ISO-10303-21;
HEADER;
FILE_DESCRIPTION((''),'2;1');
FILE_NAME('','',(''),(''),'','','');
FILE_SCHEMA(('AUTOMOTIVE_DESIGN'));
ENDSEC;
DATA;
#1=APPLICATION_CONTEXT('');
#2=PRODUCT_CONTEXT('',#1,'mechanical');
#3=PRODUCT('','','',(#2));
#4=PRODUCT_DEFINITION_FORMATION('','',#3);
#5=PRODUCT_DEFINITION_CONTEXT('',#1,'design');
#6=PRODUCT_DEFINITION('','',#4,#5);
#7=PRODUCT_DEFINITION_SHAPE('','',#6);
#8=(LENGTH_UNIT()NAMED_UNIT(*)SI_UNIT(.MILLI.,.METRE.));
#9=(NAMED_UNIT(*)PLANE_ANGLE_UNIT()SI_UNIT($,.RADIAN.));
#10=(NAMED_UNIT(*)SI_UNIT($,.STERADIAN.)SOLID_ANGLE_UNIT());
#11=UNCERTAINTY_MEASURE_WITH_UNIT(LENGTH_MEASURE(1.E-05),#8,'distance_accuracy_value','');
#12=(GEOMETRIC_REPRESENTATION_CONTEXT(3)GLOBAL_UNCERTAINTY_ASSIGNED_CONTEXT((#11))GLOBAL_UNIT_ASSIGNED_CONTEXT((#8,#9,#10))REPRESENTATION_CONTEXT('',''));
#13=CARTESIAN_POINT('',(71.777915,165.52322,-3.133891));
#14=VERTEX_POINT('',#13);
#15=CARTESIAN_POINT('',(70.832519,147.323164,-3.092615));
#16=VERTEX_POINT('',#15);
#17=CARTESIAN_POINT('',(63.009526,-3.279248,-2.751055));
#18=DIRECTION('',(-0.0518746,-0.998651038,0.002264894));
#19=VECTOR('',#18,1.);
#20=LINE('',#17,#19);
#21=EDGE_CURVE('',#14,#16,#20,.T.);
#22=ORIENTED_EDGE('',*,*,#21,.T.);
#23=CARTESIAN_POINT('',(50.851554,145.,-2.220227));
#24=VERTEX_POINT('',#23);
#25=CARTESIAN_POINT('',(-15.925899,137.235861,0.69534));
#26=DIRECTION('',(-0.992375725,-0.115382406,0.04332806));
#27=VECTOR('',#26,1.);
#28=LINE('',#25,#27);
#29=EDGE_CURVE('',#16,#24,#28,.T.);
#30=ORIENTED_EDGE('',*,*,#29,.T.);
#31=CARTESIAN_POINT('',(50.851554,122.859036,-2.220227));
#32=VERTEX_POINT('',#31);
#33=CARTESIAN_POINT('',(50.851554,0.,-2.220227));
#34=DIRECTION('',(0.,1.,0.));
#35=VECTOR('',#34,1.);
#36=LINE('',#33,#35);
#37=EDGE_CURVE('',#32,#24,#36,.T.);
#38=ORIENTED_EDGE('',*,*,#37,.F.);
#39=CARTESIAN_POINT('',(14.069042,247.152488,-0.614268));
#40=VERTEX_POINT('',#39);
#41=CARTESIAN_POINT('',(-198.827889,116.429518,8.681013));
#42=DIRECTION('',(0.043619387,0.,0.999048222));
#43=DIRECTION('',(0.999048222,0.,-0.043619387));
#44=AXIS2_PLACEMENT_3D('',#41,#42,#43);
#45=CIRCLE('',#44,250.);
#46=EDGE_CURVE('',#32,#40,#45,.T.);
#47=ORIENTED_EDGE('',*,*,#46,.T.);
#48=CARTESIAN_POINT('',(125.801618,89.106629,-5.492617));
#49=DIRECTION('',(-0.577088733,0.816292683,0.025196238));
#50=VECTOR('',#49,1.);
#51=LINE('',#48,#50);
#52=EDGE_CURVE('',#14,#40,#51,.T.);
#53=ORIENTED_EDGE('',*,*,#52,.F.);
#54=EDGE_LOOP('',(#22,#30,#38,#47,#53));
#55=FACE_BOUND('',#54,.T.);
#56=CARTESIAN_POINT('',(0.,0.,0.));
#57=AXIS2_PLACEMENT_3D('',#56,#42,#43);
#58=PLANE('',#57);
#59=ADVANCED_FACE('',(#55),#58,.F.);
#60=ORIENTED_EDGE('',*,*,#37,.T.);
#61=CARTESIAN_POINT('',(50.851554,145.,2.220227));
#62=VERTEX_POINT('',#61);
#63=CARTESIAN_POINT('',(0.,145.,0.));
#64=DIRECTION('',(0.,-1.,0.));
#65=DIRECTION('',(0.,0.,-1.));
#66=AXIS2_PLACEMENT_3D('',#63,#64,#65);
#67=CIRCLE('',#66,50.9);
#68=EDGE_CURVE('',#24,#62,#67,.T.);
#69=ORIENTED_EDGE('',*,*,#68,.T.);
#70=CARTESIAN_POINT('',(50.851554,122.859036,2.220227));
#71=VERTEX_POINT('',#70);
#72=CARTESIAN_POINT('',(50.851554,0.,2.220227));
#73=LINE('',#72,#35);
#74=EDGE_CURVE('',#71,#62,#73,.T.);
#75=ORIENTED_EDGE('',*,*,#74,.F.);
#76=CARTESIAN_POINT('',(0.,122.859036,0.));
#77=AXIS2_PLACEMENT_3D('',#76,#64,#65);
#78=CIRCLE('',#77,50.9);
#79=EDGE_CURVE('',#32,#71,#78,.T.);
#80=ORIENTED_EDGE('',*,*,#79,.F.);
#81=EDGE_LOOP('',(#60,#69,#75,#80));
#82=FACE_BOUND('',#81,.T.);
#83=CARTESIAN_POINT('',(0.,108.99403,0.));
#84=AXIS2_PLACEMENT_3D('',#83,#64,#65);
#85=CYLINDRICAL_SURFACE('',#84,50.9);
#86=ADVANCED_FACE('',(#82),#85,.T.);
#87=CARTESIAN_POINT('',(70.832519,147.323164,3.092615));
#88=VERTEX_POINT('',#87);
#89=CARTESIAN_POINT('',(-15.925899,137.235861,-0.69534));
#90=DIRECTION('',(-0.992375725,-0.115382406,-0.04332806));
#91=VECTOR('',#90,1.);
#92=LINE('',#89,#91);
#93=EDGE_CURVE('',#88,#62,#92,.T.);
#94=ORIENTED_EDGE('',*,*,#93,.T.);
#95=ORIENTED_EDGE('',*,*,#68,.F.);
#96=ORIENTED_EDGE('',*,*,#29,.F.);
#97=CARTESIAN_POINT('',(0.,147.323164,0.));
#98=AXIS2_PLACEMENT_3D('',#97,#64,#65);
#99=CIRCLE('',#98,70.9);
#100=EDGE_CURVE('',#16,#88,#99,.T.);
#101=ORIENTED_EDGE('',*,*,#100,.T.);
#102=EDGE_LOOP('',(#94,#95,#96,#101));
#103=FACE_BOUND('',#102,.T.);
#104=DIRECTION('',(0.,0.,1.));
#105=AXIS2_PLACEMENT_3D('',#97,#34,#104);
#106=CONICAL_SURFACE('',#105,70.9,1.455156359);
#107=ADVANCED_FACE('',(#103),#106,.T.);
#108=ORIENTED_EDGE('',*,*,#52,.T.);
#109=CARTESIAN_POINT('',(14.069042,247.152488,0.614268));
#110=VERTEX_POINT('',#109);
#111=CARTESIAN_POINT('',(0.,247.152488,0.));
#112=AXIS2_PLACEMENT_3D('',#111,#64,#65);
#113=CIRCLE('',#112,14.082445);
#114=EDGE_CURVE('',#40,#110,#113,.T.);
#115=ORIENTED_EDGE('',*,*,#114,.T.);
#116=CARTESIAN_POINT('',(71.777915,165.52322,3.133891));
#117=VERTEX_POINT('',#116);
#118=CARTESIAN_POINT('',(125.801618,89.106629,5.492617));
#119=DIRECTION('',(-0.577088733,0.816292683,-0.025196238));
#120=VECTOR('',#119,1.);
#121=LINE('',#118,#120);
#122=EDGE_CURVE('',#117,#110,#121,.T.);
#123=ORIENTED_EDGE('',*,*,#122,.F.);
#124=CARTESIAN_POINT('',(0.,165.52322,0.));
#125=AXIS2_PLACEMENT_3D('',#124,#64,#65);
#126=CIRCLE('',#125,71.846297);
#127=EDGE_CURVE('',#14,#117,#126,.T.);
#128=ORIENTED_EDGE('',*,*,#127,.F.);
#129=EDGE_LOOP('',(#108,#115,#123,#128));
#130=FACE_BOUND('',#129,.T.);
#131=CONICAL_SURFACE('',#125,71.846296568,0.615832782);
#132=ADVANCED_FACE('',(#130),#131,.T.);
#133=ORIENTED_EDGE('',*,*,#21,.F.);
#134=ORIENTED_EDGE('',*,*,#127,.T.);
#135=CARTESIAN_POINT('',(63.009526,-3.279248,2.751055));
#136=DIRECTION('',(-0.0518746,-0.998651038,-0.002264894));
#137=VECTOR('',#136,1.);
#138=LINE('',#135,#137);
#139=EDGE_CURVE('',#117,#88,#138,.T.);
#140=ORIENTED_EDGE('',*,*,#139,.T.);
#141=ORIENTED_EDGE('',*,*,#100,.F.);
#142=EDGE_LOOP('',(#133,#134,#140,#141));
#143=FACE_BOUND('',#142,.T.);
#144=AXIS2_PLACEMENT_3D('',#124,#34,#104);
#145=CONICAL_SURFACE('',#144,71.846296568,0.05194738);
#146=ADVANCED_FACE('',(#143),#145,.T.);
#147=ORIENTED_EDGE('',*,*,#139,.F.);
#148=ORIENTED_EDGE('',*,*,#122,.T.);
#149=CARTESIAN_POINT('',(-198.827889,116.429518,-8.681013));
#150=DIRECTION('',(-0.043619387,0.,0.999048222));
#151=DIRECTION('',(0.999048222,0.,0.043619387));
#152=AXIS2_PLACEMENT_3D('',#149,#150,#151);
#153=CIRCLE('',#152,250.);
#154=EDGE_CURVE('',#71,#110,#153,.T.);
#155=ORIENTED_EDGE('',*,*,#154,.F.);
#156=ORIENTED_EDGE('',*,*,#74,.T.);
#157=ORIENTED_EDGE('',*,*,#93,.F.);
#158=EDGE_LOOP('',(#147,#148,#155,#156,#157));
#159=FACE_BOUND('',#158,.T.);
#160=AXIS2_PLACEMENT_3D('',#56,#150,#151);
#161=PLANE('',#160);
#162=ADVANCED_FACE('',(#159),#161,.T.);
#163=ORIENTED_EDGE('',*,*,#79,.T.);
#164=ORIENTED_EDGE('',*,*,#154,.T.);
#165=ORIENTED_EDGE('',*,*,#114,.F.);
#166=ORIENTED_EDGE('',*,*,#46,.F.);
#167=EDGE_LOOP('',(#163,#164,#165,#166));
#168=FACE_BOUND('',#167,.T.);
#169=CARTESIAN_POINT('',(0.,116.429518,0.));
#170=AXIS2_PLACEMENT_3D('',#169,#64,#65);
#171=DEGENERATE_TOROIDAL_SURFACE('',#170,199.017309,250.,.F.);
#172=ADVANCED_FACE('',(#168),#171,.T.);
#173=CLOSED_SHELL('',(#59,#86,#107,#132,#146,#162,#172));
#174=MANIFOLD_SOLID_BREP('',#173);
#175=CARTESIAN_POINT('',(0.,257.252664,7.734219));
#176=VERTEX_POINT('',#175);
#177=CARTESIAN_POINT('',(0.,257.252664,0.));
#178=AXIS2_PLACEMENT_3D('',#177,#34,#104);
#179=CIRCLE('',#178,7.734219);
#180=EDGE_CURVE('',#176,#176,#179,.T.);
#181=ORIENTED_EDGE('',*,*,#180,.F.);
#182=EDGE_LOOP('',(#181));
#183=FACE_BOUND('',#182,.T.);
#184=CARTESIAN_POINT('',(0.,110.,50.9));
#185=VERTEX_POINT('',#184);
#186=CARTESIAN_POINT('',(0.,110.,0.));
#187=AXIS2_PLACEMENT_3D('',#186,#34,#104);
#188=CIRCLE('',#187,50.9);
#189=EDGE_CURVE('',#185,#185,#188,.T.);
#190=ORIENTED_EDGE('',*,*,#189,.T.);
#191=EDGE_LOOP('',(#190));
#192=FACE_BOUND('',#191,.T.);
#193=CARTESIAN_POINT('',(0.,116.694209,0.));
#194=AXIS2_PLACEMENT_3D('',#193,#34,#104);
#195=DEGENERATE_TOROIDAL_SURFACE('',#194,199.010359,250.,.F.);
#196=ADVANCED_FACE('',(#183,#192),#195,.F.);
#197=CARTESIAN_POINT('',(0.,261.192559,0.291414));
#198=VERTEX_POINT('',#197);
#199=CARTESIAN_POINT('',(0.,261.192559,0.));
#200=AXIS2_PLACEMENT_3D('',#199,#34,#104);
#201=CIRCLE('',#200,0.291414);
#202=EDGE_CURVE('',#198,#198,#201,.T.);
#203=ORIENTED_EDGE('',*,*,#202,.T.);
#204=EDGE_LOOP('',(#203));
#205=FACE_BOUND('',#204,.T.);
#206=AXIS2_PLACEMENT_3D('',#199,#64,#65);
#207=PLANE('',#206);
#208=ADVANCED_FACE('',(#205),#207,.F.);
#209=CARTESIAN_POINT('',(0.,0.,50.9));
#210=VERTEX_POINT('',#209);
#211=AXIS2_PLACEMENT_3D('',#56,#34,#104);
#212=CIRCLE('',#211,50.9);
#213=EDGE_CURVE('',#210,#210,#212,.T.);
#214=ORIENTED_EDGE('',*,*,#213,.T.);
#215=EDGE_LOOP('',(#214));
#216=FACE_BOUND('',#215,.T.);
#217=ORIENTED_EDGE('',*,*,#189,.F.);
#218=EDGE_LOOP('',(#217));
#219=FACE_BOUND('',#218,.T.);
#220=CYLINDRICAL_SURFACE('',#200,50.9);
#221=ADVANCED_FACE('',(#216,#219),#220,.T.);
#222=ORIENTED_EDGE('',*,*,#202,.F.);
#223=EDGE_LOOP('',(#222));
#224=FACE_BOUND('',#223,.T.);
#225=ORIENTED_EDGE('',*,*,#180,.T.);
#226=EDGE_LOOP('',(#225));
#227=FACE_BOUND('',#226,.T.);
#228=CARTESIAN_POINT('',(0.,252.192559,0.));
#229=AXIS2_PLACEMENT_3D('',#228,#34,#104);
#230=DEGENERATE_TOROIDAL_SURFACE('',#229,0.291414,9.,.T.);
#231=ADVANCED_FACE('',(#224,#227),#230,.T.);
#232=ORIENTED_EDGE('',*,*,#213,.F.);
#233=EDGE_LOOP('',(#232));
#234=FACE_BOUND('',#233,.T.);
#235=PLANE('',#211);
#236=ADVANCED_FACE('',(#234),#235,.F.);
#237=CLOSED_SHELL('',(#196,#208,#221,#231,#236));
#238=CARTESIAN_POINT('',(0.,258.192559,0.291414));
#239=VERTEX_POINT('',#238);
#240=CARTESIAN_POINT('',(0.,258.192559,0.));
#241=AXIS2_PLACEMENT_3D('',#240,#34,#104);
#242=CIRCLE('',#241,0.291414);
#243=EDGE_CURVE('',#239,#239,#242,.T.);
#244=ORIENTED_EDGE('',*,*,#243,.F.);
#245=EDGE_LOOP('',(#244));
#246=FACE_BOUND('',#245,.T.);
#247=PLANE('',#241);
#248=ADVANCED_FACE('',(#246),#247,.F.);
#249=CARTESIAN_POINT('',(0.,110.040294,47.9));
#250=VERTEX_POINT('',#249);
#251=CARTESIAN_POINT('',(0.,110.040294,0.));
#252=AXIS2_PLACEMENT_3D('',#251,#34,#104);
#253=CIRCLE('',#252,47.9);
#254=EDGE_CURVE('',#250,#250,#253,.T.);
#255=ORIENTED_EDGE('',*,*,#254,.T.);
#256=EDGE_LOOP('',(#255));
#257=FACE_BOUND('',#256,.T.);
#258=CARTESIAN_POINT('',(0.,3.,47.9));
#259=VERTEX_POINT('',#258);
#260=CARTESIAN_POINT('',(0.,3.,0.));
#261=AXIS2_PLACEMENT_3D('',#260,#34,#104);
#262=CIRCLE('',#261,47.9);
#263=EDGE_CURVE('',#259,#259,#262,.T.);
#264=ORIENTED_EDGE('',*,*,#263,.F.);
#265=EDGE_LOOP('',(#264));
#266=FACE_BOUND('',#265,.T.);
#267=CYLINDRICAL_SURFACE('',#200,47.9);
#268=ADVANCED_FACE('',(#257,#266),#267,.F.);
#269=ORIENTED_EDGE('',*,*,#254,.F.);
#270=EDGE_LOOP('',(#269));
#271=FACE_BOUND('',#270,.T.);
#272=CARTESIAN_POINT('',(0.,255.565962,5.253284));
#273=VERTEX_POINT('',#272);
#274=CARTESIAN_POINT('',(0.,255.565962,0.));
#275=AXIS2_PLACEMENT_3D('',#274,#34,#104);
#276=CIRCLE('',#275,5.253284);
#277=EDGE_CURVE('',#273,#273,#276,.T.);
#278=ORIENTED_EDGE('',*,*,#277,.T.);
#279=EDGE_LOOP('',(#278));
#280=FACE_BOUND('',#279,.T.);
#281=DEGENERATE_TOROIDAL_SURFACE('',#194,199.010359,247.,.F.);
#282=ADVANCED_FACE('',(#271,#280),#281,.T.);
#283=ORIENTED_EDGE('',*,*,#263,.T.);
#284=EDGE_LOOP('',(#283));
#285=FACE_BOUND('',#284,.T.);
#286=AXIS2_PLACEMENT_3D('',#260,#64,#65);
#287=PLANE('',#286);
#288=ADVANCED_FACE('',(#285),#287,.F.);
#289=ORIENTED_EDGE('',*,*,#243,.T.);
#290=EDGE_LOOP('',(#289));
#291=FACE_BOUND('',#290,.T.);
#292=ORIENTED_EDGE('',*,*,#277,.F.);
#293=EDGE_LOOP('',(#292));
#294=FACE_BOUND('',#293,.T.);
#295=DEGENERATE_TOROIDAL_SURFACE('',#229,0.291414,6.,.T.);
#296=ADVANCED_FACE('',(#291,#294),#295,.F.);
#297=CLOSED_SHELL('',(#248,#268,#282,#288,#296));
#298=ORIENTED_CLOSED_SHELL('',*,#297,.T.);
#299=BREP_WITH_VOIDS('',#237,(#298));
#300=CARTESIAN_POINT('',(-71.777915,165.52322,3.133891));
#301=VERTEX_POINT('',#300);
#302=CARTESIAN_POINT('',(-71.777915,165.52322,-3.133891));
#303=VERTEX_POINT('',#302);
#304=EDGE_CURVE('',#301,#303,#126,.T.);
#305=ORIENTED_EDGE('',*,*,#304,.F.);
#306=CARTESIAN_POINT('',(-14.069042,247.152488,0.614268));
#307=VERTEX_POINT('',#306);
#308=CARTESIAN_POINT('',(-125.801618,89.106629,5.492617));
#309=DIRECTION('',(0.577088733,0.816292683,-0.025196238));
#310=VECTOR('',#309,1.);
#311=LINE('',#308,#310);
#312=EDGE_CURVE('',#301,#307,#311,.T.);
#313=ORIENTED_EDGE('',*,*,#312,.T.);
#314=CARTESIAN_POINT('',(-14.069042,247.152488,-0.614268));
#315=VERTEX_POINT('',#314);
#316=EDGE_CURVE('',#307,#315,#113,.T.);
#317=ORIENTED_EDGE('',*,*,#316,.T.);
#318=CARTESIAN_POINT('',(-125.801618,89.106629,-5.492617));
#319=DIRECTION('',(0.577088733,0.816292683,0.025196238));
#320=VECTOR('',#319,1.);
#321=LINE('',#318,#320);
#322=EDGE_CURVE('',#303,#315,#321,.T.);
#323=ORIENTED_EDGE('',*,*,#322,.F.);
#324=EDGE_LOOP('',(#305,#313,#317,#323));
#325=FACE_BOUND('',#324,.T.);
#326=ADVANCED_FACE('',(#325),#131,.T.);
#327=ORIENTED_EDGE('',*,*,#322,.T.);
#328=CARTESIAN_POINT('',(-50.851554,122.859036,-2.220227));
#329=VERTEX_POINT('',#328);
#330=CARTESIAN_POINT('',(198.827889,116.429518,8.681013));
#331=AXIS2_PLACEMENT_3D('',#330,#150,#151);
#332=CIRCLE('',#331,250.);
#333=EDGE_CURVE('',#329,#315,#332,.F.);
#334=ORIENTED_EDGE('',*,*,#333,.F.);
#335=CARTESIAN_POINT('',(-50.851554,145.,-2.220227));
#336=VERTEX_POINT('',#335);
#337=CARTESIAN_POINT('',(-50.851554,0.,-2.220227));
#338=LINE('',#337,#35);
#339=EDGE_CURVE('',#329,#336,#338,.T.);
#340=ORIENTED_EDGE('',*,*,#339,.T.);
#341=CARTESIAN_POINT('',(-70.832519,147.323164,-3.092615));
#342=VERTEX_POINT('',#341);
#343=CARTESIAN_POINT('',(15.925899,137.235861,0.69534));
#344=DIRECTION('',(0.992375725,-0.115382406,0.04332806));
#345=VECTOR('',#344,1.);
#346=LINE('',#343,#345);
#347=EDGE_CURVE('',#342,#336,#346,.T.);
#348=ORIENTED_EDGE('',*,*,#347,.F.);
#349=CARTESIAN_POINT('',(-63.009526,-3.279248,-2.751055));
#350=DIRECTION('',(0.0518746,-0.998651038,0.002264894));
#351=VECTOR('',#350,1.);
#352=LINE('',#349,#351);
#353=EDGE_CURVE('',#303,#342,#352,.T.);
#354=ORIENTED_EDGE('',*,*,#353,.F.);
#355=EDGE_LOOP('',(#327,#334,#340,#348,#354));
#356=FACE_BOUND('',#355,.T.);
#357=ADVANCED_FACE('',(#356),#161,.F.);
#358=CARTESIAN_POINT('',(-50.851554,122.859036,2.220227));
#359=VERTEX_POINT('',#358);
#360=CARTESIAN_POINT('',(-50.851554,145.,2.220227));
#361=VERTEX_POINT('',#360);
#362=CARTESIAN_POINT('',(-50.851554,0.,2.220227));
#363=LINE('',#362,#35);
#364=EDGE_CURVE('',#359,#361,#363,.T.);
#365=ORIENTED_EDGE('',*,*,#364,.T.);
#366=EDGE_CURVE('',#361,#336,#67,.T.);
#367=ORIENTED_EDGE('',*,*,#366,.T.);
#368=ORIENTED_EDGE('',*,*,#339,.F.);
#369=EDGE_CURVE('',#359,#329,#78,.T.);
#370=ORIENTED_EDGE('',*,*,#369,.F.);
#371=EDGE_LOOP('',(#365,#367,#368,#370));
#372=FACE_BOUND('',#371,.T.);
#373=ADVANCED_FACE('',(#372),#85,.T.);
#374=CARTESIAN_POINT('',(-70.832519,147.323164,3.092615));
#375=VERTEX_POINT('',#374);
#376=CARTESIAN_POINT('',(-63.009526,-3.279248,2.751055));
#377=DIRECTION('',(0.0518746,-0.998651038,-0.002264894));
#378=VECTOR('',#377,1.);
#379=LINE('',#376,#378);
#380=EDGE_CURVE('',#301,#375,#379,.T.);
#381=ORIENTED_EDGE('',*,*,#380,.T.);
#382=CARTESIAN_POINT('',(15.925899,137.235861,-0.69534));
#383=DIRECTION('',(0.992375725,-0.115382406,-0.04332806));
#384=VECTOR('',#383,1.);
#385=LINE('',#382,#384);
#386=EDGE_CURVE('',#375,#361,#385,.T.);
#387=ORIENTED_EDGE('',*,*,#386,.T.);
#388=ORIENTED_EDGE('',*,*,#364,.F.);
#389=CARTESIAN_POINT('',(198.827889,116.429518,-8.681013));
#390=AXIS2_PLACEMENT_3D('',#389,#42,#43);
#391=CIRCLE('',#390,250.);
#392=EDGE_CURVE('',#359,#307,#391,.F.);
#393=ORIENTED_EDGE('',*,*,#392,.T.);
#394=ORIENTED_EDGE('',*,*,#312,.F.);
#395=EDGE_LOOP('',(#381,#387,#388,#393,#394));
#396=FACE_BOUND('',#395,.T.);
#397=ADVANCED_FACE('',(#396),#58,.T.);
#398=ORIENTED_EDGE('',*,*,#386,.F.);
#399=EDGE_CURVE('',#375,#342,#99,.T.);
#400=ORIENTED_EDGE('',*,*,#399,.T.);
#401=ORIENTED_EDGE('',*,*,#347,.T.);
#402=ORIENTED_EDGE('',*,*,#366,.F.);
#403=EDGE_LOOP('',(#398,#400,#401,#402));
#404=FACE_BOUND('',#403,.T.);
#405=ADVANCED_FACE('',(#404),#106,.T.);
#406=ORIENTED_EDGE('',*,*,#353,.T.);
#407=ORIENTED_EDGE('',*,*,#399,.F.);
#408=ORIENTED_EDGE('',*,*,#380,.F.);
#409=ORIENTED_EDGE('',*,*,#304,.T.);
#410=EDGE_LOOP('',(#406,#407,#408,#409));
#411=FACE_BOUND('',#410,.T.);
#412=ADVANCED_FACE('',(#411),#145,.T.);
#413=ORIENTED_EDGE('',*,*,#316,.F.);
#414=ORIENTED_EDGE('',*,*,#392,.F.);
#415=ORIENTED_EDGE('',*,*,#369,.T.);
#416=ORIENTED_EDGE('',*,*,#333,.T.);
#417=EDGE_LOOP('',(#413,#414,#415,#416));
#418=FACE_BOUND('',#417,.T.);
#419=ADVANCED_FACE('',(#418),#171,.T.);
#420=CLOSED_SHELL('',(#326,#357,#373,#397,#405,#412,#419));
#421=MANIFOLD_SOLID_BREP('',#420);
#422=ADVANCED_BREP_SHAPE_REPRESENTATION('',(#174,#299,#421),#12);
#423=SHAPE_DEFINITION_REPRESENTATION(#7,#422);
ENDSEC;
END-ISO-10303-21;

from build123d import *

# Parameters (mm, degrees)
REVOLVE2_ANGLE           = 2.5
REVOLVE2_OTHER_WAY_ANGLE = 2.5


with BuildPart() as part:
    # Sketch1 → Revolve1 (revolve)
    with BuildSketch(Plane.XY, mode=Mode.PRIVATE) as revolve1_sk:
        with BuildLine():
            Line((0, 0), (50.9, 0))
            Line((50.9, 0), (50.9, 110))
            ThreePointArc((50.9, 110), (40.894350566, 187.020094879), (7.734219256, 257.252663728))
            ThreePointArc((7.734219256, 257.252663728), (4.50205931, 260.146833019), (0.291414436, 261.192559341))
            Line((0.291414436, 261.192559341), (0, 261.192559341))
            Line((0, 261.192559341), (0, 258.192559341))
            Line((0, 258.192559341), (0.291414436, 258.192559341))
            ThreePointArc((0.291414436, 258.192559341), (3.098511019, 257.495408459), (5.253284316, 255.565962266))
            ThreePointArc((5.253284316, 255.565962266), (38.021126548, 186.156967057), (47.9, 110.040293721))
            Line((47.9, 110.040293721), (47.9, 3))
            Line((47.9, 3), (0, 3))
            Line((0, 3), (0, 0))
        make_face()
    revolve(revolve1_sk.sketch.rotate(Axis((0, 261.192559341, 0), (0, -1, 0)), 90), axis=Axis((0, 261.192559341, 0), (0, -1, 0)))


with BuildPart() as body_2:
    # Sketch2 → Revolve2 (revolve)
    with BuildSketch(Plane.XY):
        with BuildLine():
            Line((-50.9, 122.859035945), (-50.9, 145))
            Line((-50.9, 145), (-70.9, 147.323164187))
            Line((-70.9, 147.323164187), (-71.846296568, 165.523219819))
            Line((-71.846296568, 165.523219819), (-14.082444903, 247.152488104))
            ThreePointArc((-14.082444903, 247.152488104), (-40.68754222, 187.433632917), (-50.9, 122.859035945))
        make_face()
        with BuildLine():
            ThreePointArc((50.9, 122.859035945), (40.68754222, 187.433632917), (14.082444903, 247.152488104))
            Line((14.082444903, 247.152488104), (71.846296568, 165.523219819))
            Line((71.846296568, 165.523219819), (70.9, 147.323164187))
            Line((70.9, 147.323164187), (50.9, 145))
            Line((50.9, 145), (50.9, 122.859035945))
        make_face()
    revolve(axis=Axis((0, 108.994029955, 0), (0, 1, 0)), revolution_arc=REVOLVE2_ANGLE)

    # Sketch2 → Revolve2 other way (revolve)
    with BuildSketch(Plane.XY):
        with BuildLine():
            Line((-50.9, 122.859035945), (-50.9, 145))
            Line((-50.9, 145), (-70.9, 147.323164187))
            Line((-70.9, 147.323164187), (-71.846296568, 165.523219819))
            Line((-71.846296568, 165.523219819), (-14.082444903, 247.152488104))
            ThreePointArc((-14.082444903, 247.152488104), (-40.68754222, 187.433632917), (-50.9, 122.859035945))
        make_face()
        with BuildLine():
            ThreePointArc((50.9, 122.859035945), (40.68754222, 187.433632917), (14.082444903, 247.152488104))
            Line((14.082444903, 247.152488104), (71.846296568, 165.523219819))
            Line((71.846296568, 165.523219819), (70.9, 147.323164187))
            Line((70.9, 147.323164187), (50.9, 145))
            Line((50.9, 145), (50.9, 122.859035945))
        make_face()
    revolve(axis=Axis((0, 108.994029955, 0), (0, -1, 0)), revolution_arc=REVOLVE2_OTHER_WAY_ANGLE)


solid = Compound([part.part, body_2.part])
